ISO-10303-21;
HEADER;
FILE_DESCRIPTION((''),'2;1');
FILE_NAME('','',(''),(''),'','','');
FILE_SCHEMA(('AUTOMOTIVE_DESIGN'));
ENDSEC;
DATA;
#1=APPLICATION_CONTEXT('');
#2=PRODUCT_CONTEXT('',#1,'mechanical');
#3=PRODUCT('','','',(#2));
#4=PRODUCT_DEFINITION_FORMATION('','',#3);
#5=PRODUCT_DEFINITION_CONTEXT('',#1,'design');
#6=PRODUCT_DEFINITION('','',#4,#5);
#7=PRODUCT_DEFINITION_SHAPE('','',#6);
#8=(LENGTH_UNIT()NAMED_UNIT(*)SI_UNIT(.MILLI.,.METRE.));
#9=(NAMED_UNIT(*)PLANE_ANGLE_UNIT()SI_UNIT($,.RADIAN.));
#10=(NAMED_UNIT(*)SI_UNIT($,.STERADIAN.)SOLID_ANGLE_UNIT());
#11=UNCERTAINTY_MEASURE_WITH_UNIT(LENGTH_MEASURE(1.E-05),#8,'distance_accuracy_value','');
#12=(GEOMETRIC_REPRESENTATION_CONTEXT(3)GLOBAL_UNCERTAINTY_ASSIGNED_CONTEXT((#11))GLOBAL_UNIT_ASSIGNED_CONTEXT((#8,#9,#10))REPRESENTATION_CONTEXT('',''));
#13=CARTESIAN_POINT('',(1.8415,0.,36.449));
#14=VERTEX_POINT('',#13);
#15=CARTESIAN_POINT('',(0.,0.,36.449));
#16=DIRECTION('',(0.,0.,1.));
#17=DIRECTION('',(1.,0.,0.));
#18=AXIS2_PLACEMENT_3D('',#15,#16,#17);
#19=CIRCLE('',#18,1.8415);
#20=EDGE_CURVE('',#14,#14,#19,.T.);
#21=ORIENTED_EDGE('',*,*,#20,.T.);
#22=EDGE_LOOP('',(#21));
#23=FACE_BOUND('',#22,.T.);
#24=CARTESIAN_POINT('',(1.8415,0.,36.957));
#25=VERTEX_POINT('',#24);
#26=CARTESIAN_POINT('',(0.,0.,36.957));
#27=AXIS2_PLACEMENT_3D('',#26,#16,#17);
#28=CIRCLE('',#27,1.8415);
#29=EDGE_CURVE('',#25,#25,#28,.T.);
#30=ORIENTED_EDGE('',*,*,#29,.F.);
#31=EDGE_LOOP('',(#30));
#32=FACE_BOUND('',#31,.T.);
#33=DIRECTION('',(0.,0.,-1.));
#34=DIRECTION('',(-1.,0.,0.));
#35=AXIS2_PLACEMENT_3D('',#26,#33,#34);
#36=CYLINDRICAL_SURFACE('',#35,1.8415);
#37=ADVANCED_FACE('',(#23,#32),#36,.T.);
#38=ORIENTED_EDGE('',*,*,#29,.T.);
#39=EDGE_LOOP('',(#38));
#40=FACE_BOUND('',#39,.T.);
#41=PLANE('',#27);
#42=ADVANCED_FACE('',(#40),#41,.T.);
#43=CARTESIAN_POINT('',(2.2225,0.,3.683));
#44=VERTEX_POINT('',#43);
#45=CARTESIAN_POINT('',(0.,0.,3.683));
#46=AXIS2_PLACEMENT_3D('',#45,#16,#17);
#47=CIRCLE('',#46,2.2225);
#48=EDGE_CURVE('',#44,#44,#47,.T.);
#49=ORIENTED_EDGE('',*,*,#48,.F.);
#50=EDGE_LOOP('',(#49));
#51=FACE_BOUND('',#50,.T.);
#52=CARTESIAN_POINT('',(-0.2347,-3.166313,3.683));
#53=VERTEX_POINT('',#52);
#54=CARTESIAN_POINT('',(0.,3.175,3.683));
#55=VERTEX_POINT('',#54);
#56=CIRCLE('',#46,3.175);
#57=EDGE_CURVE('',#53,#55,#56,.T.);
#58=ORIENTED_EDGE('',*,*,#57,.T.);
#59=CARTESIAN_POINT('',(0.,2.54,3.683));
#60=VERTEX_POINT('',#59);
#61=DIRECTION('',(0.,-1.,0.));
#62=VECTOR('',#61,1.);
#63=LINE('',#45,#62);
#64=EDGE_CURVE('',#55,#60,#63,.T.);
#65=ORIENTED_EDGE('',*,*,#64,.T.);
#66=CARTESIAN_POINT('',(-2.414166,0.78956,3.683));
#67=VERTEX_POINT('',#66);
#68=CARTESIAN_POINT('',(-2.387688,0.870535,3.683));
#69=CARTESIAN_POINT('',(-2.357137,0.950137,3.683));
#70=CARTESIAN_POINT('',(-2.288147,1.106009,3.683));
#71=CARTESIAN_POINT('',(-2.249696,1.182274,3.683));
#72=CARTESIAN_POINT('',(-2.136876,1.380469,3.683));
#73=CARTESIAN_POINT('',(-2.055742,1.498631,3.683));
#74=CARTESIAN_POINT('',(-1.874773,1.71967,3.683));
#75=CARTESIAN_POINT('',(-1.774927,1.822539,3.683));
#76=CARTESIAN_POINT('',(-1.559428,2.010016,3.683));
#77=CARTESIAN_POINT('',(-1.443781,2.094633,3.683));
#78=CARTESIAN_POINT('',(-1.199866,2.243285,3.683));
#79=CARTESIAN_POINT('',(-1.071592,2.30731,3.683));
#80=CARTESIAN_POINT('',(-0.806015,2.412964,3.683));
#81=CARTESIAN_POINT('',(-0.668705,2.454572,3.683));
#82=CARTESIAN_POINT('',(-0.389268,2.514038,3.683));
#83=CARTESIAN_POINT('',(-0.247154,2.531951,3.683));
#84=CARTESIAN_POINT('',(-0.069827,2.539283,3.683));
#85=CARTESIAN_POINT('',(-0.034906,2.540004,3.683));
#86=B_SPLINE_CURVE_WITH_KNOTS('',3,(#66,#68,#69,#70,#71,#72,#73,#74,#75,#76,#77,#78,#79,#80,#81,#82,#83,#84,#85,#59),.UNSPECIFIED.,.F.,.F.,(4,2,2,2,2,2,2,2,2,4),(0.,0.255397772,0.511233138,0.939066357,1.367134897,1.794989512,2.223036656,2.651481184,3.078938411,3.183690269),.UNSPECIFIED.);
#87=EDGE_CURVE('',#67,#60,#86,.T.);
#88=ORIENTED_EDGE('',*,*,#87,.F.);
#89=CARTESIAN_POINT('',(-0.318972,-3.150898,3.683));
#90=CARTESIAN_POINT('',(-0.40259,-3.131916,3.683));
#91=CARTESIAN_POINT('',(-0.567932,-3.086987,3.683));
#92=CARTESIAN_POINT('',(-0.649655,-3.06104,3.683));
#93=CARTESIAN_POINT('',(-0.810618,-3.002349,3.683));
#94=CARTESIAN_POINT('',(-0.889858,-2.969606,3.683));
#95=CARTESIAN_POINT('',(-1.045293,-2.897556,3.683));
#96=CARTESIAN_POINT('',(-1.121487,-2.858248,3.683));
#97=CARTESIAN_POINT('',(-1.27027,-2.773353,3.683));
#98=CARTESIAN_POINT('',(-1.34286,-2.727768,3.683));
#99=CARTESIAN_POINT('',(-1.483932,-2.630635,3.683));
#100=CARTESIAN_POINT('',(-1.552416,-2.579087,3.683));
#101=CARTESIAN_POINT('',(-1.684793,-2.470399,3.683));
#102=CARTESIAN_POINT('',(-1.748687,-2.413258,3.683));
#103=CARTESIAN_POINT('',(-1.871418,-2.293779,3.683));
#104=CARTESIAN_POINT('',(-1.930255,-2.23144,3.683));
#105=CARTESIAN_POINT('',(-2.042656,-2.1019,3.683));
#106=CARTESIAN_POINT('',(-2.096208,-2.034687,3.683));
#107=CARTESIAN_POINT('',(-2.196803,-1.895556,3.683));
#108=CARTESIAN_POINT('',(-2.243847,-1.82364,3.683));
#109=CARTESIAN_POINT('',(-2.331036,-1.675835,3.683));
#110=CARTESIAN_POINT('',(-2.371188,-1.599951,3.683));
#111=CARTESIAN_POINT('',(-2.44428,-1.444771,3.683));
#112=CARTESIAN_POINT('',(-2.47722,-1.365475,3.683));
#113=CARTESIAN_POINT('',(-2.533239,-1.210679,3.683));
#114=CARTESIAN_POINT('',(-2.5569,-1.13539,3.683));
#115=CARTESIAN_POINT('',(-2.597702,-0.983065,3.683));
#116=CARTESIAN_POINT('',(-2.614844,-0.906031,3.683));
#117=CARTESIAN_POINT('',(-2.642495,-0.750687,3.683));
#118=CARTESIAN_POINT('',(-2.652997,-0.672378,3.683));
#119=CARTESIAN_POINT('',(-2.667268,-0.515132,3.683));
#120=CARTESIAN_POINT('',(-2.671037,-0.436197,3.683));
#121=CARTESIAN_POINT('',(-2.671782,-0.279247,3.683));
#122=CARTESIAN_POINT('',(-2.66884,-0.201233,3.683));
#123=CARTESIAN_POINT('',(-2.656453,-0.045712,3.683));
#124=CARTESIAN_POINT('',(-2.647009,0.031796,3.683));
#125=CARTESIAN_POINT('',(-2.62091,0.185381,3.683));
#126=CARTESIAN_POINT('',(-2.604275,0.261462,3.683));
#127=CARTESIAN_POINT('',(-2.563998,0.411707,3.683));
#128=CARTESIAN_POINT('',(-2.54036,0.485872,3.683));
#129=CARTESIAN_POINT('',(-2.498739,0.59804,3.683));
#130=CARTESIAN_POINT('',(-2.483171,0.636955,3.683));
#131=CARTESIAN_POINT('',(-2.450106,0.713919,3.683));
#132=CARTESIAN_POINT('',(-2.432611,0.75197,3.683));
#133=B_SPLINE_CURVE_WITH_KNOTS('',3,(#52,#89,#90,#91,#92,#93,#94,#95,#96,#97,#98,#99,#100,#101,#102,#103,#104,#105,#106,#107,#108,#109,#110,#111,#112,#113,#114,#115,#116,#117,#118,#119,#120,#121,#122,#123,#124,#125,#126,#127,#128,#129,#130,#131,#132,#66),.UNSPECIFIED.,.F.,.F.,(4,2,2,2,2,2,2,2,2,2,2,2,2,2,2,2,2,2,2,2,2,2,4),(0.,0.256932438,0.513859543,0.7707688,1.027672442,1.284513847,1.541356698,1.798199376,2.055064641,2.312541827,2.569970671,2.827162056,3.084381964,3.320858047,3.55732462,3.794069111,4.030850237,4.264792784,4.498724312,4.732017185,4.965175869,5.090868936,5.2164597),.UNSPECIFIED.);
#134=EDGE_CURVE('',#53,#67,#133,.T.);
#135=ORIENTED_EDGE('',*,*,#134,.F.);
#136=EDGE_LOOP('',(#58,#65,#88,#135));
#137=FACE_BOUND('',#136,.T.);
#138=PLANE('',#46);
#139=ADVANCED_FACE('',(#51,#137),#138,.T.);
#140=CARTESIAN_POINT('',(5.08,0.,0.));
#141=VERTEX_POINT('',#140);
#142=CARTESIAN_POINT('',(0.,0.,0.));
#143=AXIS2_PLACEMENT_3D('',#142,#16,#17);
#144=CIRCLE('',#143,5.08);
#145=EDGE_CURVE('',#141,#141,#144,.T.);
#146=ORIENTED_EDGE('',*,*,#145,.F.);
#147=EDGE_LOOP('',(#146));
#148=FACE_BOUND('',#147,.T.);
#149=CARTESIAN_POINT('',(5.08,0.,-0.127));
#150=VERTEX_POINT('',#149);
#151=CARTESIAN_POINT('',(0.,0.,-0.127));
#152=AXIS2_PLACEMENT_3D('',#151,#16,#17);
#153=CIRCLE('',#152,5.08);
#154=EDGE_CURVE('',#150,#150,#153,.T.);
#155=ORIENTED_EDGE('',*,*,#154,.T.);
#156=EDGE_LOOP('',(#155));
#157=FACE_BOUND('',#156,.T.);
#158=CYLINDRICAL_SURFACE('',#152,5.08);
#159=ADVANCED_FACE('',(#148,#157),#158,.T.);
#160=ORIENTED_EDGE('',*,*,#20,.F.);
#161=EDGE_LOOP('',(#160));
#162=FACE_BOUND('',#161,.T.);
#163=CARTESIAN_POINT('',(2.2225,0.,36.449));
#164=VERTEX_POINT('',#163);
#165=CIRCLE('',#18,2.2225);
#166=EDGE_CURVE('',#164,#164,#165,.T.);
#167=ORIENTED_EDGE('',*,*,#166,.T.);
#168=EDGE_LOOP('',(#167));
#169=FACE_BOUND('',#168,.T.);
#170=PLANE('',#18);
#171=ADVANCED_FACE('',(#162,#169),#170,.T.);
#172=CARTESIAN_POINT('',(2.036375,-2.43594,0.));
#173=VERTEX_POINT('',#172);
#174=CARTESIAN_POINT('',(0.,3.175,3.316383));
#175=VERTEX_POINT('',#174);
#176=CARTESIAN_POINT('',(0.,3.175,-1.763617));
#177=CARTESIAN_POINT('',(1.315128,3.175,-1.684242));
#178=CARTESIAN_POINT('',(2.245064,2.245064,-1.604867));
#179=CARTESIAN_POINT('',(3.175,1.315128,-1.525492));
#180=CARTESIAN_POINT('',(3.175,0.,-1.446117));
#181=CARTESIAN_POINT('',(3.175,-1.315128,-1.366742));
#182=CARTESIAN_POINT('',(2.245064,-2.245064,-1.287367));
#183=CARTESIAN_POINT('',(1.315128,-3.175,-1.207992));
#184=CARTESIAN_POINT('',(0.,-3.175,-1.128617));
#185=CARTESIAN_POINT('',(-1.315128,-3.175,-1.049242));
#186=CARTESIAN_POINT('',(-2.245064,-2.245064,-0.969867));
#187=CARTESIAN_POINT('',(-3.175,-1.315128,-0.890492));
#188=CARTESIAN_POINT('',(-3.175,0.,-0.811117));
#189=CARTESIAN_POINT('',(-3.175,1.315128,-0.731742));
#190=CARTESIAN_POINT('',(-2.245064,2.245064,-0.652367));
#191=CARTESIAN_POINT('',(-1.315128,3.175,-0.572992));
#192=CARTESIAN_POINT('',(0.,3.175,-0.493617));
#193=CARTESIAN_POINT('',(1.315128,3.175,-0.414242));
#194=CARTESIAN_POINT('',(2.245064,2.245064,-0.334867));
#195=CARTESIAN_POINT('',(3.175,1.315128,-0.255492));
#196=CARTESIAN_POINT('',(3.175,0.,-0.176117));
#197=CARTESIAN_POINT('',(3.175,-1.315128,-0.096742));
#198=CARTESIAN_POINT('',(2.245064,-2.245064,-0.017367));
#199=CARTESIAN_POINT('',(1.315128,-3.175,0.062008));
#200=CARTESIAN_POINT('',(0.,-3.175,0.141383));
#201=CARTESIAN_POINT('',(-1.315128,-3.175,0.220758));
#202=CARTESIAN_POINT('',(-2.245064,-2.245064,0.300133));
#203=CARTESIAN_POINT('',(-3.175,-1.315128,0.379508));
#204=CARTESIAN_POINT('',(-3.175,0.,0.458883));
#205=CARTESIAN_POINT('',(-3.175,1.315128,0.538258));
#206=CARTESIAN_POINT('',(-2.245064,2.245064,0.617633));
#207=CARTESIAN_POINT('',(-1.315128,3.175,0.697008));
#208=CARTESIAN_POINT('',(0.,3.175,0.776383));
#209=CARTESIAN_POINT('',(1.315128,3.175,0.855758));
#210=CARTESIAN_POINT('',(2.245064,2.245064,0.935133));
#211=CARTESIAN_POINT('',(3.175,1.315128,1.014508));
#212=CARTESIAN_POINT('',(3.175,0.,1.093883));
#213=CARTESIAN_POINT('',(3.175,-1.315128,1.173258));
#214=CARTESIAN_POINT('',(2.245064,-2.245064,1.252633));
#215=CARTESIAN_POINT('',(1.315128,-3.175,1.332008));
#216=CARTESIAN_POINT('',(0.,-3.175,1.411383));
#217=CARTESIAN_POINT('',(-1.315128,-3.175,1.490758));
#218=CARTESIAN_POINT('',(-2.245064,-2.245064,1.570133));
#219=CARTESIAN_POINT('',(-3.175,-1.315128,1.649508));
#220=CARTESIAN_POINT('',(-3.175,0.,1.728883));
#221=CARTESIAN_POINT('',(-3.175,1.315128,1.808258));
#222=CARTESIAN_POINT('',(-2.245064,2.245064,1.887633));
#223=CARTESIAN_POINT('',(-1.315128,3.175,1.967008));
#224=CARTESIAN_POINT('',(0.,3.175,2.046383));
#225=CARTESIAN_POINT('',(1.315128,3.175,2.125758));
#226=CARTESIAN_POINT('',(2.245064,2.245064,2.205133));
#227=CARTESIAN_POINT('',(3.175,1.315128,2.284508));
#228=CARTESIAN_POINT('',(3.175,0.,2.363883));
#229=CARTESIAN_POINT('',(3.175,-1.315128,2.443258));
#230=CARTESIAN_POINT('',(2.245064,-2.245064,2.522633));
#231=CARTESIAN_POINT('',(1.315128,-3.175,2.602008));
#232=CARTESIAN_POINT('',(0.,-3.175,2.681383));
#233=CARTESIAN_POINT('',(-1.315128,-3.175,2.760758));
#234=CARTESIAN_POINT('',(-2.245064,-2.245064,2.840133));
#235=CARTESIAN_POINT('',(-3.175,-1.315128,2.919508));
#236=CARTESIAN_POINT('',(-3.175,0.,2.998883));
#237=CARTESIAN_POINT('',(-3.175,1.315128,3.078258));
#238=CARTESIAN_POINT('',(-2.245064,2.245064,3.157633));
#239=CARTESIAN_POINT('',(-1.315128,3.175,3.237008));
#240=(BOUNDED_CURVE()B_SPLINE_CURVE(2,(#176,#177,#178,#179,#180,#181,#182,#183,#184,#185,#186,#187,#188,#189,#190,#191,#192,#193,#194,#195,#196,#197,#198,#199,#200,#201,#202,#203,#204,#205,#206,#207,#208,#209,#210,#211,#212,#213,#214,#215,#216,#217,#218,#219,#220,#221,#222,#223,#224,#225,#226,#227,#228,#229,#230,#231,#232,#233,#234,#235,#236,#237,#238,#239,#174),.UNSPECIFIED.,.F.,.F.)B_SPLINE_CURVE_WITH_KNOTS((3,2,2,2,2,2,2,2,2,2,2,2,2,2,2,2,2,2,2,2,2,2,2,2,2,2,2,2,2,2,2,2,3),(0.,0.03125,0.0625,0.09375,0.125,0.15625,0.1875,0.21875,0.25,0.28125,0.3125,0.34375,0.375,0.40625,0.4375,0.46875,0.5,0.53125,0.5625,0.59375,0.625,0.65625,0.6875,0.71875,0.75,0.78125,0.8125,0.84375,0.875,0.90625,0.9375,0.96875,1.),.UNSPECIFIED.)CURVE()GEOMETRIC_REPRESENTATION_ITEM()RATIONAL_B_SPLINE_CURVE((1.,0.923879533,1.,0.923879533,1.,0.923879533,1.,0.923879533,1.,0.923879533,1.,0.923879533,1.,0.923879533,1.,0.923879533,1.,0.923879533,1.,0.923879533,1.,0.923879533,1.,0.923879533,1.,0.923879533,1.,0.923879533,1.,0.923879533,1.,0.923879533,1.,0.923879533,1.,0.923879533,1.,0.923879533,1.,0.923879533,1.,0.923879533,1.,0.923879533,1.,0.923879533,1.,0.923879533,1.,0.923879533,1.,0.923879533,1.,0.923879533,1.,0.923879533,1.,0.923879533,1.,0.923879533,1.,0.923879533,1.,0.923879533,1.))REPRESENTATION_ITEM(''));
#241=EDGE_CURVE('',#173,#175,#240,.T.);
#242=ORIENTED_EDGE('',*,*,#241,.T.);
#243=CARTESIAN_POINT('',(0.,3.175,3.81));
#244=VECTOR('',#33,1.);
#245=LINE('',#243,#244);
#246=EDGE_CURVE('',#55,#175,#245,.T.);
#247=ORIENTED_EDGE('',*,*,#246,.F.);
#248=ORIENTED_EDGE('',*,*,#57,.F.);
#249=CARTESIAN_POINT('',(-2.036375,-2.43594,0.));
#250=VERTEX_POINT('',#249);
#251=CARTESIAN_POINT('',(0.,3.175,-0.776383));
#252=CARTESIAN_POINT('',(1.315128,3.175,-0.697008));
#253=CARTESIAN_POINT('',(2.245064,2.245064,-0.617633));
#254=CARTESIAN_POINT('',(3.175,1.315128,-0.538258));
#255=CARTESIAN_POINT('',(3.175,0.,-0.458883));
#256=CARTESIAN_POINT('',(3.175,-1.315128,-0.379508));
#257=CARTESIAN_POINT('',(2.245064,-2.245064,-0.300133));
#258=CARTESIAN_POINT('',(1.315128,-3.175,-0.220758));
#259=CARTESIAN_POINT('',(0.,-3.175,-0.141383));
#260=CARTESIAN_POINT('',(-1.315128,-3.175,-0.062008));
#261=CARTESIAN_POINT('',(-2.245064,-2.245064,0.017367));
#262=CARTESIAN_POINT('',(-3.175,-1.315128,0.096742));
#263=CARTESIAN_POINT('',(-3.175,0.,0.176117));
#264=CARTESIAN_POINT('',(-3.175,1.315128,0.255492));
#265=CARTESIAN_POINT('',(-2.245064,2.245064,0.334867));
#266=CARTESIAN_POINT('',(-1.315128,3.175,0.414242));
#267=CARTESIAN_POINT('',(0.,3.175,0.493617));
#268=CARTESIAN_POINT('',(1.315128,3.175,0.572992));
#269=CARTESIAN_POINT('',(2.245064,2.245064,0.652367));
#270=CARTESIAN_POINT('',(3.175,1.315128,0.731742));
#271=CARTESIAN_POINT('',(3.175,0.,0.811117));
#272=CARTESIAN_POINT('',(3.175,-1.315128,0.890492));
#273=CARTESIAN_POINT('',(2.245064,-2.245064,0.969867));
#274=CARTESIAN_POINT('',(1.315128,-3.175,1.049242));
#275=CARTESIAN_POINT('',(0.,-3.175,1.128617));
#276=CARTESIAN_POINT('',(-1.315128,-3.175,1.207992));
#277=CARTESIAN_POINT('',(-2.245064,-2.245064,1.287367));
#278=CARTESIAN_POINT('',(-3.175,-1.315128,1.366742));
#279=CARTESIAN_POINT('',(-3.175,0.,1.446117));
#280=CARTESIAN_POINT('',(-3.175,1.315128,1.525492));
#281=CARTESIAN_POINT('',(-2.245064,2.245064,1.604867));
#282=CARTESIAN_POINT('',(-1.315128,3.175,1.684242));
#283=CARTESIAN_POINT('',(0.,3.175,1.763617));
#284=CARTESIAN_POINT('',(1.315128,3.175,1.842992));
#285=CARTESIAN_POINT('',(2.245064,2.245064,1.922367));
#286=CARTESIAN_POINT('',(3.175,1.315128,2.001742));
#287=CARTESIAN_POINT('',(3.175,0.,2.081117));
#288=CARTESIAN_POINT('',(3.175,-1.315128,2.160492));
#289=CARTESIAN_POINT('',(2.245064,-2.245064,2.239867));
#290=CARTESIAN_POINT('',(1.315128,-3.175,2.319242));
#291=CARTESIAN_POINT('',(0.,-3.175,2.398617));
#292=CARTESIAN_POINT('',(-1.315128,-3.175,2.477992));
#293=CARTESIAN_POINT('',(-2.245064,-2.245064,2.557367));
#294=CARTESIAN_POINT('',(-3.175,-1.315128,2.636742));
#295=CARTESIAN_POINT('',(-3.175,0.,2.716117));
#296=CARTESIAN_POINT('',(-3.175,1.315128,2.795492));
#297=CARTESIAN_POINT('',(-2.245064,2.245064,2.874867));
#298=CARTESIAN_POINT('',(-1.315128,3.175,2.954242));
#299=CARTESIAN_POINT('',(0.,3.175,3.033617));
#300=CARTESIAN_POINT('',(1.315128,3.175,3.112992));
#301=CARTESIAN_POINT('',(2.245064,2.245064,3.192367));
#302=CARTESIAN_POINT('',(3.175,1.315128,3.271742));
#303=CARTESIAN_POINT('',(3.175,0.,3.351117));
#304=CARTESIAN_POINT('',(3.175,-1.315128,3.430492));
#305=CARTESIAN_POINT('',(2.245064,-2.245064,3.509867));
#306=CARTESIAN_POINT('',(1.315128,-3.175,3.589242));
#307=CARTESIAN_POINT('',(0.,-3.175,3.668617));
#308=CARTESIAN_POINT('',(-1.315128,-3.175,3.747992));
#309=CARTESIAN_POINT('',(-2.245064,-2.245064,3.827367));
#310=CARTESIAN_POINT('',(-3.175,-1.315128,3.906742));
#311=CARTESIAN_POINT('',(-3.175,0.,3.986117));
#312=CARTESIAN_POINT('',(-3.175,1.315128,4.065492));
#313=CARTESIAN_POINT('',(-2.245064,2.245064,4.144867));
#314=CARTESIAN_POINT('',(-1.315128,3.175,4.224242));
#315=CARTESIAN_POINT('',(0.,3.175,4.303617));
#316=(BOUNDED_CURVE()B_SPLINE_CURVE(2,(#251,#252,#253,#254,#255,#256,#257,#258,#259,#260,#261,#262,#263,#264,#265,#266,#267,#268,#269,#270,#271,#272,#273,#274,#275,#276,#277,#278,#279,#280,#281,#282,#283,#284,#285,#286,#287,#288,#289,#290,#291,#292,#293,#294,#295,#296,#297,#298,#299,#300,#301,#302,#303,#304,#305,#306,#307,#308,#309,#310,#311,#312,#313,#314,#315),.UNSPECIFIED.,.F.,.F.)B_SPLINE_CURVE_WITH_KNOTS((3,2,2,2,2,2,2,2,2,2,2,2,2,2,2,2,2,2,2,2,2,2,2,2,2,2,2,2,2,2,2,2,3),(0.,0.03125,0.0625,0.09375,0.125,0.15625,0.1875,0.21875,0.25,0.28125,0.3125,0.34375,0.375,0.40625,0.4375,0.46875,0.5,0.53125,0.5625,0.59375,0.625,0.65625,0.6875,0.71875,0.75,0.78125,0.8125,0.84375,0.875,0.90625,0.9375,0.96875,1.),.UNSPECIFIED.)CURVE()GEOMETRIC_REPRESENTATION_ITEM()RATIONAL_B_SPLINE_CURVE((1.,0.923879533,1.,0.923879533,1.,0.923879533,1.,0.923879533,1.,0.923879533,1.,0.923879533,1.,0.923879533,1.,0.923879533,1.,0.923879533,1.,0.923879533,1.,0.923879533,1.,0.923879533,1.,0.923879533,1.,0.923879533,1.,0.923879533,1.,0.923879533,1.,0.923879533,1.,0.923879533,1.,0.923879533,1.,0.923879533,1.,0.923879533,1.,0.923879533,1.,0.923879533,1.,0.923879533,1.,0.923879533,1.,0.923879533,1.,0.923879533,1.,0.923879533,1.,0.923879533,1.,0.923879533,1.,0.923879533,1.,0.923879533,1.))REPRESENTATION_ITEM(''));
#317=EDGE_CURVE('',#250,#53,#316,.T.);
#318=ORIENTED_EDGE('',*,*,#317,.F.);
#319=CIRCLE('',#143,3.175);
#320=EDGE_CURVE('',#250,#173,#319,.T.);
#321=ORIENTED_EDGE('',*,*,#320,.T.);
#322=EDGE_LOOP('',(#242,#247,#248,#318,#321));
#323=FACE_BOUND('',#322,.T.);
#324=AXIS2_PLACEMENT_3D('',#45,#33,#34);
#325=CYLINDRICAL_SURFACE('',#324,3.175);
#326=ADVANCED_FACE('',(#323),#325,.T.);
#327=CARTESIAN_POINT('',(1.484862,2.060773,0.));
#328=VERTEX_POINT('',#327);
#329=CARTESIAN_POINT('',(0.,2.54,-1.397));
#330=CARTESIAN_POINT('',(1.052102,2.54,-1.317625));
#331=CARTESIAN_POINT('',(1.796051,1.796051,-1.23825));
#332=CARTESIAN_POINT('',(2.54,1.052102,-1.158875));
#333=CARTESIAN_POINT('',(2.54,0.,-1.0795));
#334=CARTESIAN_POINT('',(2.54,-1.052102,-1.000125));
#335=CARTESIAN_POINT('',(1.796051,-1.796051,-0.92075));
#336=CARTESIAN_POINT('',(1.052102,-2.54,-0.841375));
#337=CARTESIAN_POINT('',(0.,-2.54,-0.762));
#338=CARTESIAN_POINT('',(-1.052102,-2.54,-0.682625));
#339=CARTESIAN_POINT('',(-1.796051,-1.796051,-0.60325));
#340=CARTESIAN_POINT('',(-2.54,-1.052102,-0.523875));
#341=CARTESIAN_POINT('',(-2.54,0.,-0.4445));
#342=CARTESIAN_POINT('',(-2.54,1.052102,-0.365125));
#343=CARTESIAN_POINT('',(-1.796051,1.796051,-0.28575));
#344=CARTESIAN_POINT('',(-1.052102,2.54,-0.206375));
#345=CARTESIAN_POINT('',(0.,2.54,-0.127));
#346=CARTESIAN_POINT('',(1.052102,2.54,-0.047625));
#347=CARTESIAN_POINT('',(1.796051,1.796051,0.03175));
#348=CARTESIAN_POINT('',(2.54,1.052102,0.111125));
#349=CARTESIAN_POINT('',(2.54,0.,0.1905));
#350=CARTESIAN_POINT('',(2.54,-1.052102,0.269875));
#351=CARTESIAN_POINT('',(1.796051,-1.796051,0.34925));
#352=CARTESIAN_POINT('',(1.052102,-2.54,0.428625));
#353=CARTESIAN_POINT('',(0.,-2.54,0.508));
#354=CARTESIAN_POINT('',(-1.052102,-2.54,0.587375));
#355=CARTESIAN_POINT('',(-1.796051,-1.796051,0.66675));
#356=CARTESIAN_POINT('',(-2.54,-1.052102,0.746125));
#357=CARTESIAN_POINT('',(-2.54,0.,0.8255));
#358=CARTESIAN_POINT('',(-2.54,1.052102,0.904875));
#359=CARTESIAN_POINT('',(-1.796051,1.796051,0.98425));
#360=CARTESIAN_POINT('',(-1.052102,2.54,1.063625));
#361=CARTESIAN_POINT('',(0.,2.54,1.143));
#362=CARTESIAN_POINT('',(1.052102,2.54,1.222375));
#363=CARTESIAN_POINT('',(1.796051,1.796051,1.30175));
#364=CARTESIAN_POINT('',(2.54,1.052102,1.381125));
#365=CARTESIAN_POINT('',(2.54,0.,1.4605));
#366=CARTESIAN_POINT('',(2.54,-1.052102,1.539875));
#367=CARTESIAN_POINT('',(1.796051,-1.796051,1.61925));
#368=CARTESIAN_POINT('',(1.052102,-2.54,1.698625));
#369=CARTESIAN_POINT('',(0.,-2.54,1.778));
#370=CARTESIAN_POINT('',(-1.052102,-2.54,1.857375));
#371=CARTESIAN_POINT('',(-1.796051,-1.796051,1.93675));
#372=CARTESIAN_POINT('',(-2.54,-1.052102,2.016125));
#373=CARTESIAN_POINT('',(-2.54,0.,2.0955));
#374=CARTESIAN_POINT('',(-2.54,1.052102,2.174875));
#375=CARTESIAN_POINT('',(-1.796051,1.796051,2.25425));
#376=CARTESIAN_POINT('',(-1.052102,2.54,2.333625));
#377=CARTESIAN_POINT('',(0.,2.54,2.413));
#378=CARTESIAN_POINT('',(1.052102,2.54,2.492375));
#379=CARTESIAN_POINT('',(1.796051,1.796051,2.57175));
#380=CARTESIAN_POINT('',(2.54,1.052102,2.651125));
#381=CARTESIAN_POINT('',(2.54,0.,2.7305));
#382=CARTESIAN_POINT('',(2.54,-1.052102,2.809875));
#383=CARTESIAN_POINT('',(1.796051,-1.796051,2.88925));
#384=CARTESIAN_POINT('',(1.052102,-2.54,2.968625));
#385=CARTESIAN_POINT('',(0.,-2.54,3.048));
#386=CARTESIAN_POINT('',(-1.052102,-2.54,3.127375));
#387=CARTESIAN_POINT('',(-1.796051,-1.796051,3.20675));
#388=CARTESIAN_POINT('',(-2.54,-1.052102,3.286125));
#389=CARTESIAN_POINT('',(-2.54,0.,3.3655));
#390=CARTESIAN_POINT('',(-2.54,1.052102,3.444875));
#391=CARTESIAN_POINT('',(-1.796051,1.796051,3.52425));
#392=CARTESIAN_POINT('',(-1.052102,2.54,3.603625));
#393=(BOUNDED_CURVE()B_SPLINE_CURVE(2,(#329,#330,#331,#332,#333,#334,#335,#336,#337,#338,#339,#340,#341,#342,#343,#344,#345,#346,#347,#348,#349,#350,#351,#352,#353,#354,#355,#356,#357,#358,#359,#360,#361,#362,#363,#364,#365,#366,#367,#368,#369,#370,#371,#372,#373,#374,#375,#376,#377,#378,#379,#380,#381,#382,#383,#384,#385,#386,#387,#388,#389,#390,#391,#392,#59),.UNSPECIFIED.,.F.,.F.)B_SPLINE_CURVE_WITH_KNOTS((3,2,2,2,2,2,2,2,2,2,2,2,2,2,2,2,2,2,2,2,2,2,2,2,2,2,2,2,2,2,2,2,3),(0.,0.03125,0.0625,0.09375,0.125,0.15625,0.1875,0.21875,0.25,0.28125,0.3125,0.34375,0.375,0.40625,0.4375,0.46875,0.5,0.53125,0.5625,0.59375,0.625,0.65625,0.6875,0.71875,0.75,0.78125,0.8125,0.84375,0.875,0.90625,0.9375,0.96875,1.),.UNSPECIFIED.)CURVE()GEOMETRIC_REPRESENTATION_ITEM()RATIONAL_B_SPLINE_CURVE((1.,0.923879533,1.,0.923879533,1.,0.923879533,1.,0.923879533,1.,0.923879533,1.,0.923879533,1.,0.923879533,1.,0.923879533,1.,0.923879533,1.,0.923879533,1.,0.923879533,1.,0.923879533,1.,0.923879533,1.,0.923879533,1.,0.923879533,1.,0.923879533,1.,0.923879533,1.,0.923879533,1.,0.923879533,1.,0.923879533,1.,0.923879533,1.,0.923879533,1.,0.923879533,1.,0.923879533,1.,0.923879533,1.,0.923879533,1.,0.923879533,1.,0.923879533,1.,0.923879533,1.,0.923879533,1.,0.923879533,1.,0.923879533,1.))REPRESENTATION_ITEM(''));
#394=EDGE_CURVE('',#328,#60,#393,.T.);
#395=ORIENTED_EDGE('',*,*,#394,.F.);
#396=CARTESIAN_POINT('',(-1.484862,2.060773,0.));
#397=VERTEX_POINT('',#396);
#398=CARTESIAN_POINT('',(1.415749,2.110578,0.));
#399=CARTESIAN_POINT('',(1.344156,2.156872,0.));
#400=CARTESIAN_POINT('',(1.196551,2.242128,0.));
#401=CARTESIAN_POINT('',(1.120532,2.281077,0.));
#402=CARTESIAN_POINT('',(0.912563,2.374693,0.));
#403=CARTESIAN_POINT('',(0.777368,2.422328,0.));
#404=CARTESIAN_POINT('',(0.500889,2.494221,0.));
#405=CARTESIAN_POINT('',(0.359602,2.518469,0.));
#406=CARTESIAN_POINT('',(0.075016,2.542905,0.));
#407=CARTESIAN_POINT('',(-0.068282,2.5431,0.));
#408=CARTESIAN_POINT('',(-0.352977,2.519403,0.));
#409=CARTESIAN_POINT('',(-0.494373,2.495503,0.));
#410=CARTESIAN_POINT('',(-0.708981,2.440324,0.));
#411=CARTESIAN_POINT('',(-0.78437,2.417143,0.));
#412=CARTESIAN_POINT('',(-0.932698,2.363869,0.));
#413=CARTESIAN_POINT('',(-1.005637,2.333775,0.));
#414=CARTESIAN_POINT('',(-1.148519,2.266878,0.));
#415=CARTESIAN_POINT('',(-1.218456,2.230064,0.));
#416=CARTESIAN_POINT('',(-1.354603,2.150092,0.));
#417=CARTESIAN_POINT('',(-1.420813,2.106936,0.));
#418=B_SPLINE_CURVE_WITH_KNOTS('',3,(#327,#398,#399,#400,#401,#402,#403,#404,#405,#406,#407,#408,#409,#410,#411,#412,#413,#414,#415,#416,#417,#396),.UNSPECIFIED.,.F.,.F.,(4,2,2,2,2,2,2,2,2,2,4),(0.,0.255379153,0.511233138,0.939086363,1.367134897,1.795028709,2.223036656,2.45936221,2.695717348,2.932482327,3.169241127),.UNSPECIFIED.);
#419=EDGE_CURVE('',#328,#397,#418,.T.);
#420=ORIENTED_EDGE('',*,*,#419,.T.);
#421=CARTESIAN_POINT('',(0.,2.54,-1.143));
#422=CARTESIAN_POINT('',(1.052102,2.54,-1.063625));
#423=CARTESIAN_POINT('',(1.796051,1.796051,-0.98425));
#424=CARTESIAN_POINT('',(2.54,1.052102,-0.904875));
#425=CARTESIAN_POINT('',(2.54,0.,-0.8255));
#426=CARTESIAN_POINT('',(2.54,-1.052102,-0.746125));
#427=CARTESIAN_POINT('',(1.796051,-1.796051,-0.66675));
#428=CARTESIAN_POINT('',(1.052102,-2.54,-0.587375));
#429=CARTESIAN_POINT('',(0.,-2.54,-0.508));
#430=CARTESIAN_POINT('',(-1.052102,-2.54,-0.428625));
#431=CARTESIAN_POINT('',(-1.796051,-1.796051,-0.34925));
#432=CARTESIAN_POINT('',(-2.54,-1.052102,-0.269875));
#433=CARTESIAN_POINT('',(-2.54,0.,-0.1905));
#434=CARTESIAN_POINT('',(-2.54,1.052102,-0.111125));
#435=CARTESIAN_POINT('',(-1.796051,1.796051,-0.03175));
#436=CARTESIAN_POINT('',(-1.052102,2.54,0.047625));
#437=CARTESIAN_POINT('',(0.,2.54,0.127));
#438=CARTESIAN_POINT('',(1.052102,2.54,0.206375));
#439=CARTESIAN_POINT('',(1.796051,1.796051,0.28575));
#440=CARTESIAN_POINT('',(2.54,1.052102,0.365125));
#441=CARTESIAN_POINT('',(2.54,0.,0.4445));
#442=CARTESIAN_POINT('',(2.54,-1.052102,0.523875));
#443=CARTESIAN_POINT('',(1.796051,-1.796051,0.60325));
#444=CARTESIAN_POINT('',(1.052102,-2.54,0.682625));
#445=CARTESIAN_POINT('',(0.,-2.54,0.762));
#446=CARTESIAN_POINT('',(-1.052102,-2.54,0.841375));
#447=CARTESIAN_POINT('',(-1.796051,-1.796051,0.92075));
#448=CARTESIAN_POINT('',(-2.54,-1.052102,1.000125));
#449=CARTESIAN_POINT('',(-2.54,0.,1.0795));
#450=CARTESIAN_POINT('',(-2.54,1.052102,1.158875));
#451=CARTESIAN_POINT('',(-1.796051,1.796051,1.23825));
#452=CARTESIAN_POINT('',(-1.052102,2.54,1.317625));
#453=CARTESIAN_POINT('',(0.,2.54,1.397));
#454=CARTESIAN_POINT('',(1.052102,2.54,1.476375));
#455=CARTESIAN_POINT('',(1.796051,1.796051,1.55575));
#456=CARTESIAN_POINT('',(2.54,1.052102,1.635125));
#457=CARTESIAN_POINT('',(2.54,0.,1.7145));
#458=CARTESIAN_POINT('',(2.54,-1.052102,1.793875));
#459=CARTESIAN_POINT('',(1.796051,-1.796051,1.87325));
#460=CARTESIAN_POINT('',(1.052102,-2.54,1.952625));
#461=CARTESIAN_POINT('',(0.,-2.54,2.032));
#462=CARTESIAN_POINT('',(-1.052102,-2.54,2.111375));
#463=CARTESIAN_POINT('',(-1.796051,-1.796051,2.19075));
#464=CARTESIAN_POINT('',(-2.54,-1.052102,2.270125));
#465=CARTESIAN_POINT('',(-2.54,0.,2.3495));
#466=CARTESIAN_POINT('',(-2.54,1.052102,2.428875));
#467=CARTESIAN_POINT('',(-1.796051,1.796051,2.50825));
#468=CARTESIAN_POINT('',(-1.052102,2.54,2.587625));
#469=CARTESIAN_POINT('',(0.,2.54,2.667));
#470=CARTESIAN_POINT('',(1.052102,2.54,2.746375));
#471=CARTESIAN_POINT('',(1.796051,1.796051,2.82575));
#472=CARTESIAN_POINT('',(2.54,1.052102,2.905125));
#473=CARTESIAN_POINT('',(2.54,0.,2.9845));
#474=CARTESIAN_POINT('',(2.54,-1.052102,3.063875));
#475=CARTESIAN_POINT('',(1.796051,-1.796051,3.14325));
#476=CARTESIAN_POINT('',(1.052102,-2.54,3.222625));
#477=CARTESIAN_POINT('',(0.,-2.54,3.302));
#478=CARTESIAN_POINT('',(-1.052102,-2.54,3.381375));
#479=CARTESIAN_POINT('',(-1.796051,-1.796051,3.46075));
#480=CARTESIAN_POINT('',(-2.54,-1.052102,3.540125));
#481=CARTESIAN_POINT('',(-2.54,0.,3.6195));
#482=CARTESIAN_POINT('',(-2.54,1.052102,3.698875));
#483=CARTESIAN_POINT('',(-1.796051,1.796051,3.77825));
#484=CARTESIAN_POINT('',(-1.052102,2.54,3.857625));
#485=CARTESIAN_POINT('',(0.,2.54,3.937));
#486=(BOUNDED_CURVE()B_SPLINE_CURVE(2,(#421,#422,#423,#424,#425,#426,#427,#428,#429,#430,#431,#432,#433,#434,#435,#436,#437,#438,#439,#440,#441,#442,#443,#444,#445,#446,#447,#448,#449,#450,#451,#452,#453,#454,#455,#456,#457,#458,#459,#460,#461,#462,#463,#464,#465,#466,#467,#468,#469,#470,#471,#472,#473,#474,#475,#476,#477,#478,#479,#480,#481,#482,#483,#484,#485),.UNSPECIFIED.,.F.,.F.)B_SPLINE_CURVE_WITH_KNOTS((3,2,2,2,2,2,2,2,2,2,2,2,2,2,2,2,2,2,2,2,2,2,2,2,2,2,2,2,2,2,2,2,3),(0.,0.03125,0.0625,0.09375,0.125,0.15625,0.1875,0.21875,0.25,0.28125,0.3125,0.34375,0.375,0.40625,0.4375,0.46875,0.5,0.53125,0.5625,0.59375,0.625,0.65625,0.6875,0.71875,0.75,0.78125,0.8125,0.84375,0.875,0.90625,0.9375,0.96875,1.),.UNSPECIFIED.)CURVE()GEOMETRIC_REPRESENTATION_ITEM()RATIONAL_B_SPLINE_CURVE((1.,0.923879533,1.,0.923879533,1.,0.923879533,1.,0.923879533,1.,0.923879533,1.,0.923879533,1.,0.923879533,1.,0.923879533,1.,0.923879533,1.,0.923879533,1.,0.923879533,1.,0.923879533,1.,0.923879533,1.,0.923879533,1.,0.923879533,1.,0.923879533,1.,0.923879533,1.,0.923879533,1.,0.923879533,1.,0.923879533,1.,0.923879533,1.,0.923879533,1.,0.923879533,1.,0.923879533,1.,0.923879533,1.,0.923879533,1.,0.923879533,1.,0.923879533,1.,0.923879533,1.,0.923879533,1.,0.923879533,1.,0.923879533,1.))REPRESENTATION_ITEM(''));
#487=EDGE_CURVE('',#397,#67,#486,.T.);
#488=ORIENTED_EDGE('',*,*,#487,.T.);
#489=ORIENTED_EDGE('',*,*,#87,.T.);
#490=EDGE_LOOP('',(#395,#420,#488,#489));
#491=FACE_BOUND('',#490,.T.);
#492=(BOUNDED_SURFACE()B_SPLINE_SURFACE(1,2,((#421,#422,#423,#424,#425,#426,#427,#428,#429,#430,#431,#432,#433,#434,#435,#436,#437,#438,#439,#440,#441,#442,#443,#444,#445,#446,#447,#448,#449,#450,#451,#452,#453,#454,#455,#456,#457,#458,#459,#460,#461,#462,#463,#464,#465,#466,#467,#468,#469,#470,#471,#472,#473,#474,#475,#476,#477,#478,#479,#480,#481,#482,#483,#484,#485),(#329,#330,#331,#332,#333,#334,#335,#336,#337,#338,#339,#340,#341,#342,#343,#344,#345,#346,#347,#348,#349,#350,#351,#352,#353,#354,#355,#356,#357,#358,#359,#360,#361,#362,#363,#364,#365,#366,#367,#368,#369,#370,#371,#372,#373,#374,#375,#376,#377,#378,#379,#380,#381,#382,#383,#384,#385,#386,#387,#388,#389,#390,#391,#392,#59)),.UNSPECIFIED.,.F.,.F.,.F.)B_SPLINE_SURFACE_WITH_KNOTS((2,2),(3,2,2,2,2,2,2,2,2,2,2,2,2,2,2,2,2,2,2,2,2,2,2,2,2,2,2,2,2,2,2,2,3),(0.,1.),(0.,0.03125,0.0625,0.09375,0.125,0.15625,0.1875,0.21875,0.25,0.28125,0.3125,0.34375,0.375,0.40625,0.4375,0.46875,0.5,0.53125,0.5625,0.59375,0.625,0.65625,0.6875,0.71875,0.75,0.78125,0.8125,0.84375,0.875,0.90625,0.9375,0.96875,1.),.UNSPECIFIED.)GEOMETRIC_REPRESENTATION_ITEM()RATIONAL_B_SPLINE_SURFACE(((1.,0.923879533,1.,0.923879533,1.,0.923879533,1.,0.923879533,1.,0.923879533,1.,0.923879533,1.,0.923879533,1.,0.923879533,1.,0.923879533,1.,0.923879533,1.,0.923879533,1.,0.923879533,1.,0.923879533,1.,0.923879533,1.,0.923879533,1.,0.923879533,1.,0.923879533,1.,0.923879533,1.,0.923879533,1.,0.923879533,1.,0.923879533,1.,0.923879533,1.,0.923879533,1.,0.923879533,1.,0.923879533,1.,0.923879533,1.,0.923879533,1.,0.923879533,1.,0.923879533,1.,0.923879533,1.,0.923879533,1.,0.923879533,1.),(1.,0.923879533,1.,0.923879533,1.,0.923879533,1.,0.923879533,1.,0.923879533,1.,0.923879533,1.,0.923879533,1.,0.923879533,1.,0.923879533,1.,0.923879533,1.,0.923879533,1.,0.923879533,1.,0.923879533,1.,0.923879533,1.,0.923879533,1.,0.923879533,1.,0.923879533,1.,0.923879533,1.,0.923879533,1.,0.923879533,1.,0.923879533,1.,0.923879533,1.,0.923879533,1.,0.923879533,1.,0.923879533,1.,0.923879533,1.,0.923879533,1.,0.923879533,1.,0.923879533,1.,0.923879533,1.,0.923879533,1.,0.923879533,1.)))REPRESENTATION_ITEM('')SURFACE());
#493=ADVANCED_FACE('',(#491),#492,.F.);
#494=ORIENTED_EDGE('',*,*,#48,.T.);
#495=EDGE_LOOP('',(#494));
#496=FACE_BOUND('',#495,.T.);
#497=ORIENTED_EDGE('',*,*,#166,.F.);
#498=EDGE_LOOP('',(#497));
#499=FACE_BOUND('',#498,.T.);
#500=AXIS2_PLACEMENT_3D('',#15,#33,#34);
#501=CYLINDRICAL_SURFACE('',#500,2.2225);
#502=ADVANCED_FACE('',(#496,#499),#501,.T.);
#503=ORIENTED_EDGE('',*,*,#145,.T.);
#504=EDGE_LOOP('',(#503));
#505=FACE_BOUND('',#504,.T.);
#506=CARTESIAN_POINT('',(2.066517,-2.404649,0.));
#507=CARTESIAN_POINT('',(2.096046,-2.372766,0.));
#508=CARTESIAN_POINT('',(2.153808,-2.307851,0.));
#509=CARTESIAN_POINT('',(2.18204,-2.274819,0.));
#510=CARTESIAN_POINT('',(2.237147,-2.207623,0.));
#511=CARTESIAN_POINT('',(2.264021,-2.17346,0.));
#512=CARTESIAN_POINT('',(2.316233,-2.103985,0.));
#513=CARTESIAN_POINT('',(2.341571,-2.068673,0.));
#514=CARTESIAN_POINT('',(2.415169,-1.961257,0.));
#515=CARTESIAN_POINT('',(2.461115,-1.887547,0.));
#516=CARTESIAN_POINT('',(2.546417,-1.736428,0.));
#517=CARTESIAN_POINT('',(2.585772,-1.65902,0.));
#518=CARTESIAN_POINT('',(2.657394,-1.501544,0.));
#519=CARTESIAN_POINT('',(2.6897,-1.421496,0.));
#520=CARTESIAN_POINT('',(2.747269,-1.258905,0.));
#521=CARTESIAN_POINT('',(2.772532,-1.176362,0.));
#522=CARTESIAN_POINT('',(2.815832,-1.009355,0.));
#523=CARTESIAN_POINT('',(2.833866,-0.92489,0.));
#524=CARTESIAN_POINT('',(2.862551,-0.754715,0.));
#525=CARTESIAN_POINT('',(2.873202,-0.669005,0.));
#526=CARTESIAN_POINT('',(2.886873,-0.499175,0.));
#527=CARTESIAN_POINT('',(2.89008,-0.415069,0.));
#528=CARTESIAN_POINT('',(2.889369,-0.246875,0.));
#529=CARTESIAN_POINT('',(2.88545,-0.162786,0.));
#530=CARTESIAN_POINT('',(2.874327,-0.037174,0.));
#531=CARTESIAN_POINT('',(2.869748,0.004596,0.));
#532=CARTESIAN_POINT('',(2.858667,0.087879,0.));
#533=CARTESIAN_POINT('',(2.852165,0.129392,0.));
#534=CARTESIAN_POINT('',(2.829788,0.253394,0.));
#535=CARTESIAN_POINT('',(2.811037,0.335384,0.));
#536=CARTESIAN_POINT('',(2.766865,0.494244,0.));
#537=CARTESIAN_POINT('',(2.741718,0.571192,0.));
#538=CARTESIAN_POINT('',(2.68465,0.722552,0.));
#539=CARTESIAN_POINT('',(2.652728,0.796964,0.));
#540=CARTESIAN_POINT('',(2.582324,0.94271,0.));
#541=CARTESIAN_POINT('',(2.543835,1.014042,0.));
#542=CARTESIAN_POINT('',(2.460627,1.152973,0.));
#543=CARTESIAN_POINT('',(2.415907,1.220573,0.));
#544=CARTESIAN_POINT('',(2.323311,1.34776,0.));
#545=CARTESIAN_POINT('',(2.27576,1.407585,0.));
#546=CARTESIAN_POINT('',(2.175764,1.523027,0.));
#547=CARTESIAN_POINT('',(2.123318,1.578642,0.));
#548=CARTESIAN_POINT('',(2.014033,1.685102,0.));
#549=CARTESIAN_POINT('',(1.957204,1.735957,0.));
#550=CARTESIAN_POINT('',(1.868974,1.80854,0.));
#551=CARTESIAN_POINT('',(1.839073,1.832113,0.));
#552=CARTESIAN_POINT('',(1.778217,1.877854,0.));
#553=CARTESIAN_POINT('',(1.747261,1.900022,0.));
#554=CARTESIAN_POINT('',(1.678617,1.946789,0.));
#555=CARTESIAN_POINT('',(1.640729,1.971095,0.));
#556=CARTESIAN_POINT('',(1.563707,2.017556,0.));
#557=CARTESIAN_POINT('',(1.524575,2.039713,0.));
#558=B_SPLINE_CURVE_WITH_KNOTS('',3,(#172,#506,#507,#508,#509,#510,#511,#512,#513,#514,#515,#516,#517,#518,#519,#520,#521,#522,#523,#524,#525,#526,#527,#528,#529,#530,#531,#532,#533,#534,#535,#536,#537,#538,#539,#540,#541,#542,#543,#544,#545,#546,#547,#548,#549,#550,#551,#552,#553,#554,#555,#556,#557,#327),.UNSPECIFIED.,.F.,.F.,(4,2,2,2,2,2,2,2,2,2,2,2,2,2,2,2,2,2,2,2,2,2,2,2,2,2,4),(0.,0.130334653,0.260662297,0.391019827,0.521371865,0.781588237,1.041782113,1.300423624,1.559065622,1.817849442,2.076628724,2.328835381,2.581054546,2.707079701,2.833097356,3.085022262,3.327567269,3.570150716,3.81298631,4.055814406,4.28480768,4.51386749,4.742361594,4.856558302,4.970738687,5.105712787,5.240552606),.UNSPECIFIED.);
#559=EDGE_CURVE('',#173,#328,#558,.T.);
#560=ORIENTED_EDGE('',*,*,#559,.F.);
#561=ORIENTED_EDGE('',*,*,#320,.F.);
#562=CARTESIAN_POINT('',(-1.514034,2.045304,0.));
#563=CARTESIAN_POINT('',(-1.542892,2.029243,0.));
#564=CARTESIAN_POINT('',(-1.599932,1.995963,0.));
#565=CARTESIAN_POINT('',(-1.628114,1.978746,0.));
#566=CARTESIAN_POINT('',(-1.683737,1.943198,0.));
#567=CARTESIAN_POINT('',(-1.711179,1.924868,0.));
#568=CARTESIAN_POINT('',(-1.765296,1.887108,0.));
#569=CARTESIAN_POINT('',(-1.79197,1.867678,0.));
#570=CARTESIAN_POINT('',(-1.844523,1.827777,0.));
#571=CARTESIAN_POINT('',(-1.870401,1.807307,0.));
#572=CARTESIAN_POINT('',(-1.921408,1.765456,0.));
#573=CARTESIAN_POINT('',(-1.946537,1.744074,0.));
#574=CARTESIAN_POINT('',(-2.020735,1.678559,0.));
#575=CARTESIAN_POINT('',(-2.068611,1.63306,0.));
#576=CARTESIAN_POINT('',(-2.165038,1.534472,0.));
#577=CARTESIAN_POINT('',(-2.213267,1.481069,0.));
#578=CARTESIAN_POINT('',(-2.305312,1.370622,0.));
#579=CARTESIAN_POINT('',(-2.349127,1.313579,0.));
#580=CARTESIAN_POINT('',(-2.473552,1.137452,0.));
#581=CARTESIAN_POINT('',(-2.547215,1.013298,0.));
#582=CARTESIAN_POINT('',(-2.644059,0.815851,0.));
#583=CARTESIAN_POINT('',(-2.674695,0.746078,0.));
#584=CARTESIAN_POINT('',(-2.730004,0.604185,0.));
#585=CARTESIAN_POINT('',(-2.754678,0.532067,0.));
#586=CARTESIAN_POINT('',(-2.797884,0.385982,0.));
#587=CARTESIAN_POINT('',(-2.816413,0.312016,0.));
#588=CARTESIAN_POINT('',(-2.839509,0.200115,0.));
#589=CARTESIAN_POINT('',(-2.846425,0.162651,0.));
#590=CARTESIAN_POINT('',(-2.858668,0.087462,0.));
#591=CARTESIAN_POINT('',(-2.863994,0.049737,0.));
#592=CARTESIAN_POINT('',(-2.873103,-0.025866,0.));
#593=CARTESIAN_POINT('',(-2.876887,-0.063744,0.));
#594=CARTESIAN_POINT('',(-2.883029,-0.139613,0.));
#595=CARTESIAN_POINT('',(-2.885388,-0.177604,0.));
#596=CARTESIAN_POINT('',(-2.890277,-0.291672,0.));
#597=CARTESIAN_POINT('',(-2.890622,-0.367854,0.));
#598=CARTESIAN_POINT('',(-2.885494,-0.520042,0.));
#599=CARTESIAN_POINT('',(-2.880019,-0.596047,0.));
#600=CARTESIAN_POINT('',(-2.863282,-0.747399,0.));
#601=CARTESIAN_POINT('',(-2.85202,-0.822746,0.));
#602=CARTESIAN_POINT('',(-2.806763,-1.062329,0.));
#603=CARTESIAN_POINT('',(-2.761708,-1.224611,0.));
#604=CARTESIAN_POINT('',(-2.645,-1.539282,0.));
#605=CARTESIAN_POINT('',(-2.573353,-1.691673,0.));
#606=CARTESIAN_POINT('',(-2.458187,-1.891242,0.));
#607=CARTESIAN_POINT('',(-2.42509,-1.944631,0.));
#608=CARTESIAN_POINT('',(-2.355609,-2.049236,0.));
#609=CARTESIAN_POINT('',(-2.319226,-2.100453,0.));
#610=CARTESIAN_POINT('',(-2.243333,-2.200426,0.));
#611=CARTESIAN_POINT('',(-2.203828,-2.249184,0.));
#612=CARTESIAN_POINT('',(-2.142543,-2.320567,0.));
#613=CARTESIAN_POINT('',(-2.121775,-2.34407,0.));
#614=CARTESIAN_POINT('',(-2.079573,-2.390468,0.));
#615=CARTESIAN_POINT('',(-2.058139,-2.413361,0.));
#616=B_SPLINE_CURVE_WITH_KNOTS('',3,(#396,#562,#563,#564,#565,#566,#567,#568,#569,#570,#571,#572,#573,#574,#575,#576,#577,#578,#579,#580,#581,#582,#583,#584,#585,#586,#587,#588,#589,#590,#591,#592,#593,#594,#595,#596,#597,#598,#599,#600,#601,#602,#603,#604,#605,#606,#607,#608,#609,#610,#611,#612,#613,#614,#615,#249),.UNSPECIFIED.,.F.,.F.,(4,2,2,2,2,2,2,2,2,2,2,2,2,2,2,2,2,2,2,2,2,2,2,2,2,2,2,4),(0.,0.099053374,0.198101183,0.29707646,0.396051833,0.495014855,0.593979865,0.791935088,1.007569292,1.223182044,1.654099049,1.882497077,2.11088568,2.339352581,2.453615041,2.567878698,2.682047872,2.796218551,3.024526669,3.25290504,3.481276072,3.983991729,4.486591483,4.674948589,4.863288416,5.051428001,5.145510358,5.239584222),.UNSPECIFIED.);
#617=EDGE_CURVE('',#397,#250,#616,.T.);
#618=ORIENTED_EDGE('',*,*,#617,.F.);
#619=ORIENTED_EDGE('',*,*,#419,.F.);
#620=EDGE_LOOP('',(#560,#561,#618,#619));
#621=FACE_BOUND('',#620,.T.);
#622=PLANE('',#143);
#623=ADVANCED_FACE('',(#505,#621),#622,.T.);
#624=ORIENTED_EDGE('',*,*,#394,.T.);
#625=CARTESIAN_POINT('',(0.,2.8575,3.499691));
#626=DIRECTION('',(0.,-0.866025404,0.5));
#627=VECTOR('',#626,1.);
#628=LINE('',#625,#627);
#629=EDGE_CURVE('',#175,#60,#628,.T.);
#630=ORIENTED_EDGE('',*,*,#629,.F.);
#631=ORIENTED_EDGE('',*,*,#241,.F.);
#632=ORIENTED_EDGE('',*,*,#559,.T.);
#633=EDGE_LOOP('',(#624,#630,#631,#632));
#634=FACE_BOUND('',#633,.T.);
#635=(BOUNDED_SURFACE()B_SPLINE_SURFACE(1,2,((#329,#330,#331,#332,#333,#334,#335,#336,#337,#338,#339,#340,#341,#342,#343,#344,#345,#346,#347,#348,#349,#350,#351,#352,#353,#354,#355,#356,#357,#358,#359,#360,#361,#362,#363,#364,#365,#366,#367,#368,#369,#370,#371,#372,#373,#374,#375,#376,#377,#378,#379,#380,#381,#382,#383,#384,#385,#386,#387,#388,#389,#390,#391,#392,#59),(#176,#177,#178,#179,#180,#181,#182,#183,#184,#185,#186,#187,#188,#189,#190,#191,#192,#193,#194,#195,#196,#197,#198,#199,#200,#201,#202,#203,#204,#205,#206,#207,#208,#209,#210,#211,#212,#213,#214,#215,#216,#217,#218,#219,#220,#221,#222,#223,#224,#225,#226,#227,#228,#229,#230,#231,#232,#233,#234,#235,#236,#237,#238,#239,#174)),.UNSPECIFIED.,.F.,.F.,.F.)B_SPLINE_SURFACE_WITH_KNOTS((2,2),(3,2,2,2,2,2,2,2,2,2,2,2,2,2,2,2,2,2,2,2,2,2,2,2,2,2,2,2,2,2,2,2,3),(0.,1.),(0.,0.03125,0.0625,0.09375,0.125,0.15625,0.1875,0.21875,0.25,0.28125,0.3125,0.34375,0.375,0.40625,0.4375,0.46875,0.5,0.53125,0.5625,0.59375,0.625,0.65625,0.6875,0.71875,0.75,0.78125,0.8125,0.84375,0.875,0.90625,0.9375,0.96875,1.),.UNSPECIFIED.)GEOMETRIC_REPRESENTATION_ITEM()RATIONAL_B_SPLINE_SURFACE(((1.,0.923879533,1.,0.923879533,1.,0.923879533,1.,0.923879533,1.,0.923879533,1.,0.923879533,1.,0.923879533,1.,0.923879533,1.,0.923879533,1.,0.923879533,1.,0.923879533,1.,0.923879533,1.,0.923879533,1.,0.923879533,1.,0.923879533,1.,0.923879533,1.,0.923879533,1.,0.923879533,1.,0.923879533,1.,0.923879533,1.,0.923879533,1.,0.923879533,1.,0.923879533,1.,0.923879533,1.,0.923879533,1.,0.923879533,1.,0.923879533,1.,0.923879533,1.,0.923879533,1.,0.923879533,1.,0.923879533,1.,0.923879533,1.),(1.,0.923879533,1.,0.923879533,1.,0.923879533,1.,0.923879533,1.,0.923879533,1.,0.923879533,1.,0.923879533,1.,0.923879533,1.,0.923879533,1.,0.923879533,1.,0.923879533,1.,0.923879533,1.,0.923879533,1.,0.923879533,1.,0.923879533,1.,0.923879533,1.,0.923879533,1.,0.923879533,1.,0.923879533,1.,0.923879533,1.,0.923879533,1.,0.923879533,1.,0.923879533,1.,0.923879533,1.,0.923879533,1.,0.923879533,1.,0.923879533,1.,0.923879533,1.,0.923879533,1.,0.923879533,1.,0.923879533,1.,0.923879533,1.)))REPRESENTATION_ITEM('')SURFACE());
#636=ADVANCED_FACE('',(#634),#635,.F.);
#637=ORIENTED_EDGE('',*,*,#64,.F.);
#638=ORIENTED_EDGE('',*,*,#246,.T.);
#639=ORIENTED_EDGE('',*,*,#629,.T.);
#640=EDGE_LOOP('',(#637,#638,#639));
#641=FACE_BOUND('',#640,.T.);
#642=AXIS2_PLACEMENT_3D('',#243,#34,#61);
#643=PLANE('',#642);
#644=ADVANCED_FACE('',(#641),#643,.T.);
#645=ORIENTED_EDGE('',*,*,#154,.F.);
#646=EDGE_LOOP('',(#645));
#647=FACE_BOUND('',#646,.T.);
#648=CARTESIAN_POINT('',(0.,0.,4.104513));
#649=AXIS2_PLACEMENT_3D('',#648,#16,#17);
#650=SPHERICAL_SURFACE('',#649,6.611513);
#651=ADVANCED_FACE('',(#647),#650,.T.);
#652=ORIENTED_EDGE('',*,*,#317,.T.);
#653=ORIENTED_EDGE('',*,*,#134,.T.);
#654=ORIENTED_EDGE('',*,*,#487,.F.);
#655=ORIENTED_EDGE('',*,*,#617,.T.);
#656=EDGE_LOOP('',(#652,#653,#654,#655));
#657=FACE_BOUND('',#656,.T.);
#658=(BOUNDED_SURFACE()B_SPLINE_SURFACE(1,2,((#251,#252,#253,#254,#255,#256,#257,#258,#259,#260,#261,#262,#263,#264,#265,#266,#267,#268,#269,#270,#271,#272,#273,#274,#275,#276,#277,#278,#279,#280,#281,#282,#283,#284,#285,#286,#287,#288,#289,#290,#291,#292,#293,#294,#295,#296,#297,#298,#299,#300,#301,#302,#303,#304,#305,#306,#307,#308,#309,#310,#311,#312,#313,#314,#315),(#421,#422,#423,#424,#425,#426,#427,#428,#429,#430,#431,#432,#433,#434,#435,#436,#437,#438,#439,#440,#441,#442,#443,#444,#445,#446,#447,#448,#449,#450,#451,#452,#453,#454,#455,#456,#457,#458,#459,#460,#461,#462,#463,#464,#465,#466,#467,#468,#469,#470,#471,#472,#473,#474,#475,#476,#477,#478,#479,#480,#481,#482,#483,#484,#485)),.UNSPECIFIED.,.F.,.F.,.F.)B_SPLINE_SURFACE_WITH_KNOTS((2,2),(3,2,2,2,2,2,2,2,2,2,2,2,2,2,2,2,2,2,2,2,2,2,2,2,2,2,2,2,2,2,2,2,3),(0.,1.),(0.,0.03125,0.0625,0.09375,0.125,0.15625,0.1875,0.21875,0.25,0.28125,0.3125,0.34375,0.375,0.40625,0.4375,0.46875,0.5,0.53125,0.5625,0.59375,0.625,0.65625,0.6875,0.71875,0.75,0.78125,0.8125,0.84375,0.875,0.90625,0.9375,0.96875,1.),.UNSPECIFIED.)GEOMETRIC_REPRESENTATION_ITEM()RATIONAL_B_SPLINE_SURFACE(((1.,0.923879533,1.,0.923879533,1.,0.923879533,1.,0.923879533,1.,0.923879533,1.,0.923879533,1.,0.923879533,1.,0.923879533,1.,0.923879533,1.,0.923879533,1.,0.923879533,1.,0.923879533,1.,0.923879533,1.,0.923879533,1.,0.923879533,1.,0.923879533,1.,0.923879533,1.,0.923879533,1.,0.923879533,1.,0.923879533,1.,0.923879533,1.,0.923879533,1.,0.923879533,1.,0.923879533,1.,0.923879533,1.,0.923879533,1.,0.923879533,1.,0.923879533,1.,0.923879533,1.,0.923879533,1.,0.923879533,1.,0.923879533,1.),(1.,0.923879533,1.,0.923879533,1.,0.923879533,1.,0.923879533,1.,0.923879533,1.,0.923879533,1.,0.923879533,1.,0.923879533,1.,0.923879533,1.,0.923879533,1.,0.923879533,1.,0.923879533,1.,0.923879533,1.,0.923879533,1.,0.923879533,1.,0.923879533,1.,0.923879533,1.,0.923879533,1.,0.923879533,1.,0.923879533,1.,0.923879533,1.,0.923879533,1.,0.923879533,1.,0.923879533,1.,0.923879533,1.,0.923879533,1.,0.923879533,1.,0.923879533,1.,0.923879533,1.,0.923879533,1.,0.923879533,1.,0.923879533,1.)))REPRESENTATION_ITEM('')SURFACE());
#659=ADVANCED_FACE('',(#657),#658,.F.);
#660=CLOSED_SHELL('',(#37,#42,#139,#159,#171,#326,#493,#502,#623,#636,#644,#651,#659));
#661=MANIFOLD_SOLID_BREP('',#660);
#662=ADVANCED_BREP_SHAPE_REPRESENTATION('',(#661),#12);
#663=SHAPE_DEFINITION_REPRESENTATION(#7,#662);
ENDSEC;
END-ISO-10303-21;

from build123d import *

# Parameters (mm, degrees)
SKETCH3_R           = 3.175
BOSS_EXTRUDE1_DEPTH = 3.683
CUT_SWEEP1_PITCH    = 1.27
SKETCH10_R          = 2.2225
BOSS_EXTRUDE5_DEPTH = 32.766
SKETCH9_R           = 5.08
BOSS_EXTRUDE4_DEPTH = 0.127
DOME3_FACE_RADIUS   = 5.08
DOME3_HEIGHT        = 2.38
SKETCH11_R          = 1.8415
BOSS_EXTRUDE6_DEPTH = 0.508


with BuildPart() as part:
    # Sketch3 → Boss-Extrude1 (new body)
    with BuildSketch(Plane.XY):
        Circle(SKETCH3_R)
    extrude(amount=BOSS_EXTRUDE1_DEPTH)

    # Cut-Sweep1: arcs per turn and ends read off the stored shape
    # Cut-Sweep1: the profile of Sketch5 profile screwed along a left-hand helix through 4 turns, 8 arcs to a turn; built about Z, then put on its axis
    cut_sweep1_z = Axis((0, 0, 0), (0, 0, 1))
    cut_sweep1_corners = [(2.54, 0, -1.397), (3.1753, 0, -1.763790626), (3.1753, 0, -0.776209374), (2.54, 0, -1.143)]
    with BuildLine(mode=Mode.PRIVATE) as cut_sweep1_profile:
        Line(cut_sweep1_corners[0], cut_sweep1_corners[1])
        Line(cut_sweep1_corners[1], cut_sweep1_corners[2])
        Line(cut_sweep1_corners[2], cut_sweep1_corners[3])
        Line(cut_sweep1_corners[3], cut_sweep1_corners[0])
    cut_sweep1_cap = Face(cut_sweep1_profile.wire())
    cut_sweep1_turn_angles = [0, -22.5, -45, -67.5, -90, -112.5, -135, -157.5, -180, -202.5, -225, -247.5, -270, -292.5, -315, -337.5, -360]
    cut_sweep1_turn_weights = [1, 0.9238795325112867, 1, 0.9238795325112867, 1, 0.9238795325112867, 1, 0.9238795325112867, 1, 0.9238795325112867, 1, 0.9238795325112867, 1, 0.9238795325112867, 1, 0.9238795325112867, 1]
    cut_sweep1_turn_rails = [Edge.make_bspline([Vector(p[0], p[1], 0).rotate(cut_sweep1_z, cut_sweep1_turn_angles[k]) / cut_sweep1_turn_weights[k] + Vector(0, 0, p[2] + -CUT_SWEEP1_PITCH * cut_sweep1_turn_angles[k] / 360) for k in range(17)], [0, 0, 0, 1, 1, 2, 2, 3, 3, 4, 4, 5, 5, 6, 6, 7, 7, 8, 8, 8], 2, cut_sweep1_turn_weights) for p in cut_sweep1_corners]
    cut_sweep1_turn_sides = [Face.make_surface_from_curves(cut_sweep1_turn_rails[p[0]], cut_sweep1_turn_rails[p[1]]) for p in [(0, 1), (1, 2), (2, 3), (3, 0)]]
    cut_sweep1 = Plane(origin=(0, 0, 0), x_dir=(0, 1, 0), z_dir=(0, 0, 1)) * Solid(Shell([*[p.moved(Location((0, 0, CUT_SWEEP1_PITCH * i))) for i in range(4) for p in cut_sweep1_turn_sides], cut_sweep1_cap, cut_sweep1_cap.rotate(cut_sweep1_z, -1440).moved(Location((0, 0, -CUT_SWEEP1_PITCH * -1440 / 360)))]))
    add(cut_sweep1, mode=Mode.SUBTRACT)

    # Sketch10 → Boss-Extrude5 (add)
    with BuildSketch(Plane.XY.offset(3.683)):
        Circle(SKETCH10_R)
    extrude(amount=BOSS_EXTRUDE5_DEPTH)

    # Sketch9 → Boss-Extrude4 (add)
    with BuildSketch(Plane.XY):
        Circle(SKETCH9_R)
    extrude(amount=-BOSS_EXTRUDE4_DEPTH)

    # Dome3: a dome of height H over a round flat face of radius A is a cap of a sphere of radius (A * A + H * H) / (2 * H)
    dome3_r = (DOME3_FACE_RADIUS * DOME3_FACE_RADIUS + DOME3_HEIGHT * DOME3_HEIGHT) / (2 * DOME3_HEIGHT)
    dome3_base = Plane((0, 0, -0.127), z_dir=(0, 0, -1))
    with Locations(dome3_base.offset(DOME3_HEIGHT - dome3_r)):
        dome3_ball = Sphere(dome3_r, mode=Mode.PRIVATE)
    add(split(dome3_ball, bisect_by=dome3_base, keep=Keep.TOP, mode=Mode.PRIVATE))

    # Sketch11 → Boss-Extrude6 (add)
    with BuildSketch(Plane.XY.offset(36.449)):
        Circle(SKETCH11_R)
    extrude(amount=BOSS_EXTRUDE6_DEPTH)


solid = part.part
